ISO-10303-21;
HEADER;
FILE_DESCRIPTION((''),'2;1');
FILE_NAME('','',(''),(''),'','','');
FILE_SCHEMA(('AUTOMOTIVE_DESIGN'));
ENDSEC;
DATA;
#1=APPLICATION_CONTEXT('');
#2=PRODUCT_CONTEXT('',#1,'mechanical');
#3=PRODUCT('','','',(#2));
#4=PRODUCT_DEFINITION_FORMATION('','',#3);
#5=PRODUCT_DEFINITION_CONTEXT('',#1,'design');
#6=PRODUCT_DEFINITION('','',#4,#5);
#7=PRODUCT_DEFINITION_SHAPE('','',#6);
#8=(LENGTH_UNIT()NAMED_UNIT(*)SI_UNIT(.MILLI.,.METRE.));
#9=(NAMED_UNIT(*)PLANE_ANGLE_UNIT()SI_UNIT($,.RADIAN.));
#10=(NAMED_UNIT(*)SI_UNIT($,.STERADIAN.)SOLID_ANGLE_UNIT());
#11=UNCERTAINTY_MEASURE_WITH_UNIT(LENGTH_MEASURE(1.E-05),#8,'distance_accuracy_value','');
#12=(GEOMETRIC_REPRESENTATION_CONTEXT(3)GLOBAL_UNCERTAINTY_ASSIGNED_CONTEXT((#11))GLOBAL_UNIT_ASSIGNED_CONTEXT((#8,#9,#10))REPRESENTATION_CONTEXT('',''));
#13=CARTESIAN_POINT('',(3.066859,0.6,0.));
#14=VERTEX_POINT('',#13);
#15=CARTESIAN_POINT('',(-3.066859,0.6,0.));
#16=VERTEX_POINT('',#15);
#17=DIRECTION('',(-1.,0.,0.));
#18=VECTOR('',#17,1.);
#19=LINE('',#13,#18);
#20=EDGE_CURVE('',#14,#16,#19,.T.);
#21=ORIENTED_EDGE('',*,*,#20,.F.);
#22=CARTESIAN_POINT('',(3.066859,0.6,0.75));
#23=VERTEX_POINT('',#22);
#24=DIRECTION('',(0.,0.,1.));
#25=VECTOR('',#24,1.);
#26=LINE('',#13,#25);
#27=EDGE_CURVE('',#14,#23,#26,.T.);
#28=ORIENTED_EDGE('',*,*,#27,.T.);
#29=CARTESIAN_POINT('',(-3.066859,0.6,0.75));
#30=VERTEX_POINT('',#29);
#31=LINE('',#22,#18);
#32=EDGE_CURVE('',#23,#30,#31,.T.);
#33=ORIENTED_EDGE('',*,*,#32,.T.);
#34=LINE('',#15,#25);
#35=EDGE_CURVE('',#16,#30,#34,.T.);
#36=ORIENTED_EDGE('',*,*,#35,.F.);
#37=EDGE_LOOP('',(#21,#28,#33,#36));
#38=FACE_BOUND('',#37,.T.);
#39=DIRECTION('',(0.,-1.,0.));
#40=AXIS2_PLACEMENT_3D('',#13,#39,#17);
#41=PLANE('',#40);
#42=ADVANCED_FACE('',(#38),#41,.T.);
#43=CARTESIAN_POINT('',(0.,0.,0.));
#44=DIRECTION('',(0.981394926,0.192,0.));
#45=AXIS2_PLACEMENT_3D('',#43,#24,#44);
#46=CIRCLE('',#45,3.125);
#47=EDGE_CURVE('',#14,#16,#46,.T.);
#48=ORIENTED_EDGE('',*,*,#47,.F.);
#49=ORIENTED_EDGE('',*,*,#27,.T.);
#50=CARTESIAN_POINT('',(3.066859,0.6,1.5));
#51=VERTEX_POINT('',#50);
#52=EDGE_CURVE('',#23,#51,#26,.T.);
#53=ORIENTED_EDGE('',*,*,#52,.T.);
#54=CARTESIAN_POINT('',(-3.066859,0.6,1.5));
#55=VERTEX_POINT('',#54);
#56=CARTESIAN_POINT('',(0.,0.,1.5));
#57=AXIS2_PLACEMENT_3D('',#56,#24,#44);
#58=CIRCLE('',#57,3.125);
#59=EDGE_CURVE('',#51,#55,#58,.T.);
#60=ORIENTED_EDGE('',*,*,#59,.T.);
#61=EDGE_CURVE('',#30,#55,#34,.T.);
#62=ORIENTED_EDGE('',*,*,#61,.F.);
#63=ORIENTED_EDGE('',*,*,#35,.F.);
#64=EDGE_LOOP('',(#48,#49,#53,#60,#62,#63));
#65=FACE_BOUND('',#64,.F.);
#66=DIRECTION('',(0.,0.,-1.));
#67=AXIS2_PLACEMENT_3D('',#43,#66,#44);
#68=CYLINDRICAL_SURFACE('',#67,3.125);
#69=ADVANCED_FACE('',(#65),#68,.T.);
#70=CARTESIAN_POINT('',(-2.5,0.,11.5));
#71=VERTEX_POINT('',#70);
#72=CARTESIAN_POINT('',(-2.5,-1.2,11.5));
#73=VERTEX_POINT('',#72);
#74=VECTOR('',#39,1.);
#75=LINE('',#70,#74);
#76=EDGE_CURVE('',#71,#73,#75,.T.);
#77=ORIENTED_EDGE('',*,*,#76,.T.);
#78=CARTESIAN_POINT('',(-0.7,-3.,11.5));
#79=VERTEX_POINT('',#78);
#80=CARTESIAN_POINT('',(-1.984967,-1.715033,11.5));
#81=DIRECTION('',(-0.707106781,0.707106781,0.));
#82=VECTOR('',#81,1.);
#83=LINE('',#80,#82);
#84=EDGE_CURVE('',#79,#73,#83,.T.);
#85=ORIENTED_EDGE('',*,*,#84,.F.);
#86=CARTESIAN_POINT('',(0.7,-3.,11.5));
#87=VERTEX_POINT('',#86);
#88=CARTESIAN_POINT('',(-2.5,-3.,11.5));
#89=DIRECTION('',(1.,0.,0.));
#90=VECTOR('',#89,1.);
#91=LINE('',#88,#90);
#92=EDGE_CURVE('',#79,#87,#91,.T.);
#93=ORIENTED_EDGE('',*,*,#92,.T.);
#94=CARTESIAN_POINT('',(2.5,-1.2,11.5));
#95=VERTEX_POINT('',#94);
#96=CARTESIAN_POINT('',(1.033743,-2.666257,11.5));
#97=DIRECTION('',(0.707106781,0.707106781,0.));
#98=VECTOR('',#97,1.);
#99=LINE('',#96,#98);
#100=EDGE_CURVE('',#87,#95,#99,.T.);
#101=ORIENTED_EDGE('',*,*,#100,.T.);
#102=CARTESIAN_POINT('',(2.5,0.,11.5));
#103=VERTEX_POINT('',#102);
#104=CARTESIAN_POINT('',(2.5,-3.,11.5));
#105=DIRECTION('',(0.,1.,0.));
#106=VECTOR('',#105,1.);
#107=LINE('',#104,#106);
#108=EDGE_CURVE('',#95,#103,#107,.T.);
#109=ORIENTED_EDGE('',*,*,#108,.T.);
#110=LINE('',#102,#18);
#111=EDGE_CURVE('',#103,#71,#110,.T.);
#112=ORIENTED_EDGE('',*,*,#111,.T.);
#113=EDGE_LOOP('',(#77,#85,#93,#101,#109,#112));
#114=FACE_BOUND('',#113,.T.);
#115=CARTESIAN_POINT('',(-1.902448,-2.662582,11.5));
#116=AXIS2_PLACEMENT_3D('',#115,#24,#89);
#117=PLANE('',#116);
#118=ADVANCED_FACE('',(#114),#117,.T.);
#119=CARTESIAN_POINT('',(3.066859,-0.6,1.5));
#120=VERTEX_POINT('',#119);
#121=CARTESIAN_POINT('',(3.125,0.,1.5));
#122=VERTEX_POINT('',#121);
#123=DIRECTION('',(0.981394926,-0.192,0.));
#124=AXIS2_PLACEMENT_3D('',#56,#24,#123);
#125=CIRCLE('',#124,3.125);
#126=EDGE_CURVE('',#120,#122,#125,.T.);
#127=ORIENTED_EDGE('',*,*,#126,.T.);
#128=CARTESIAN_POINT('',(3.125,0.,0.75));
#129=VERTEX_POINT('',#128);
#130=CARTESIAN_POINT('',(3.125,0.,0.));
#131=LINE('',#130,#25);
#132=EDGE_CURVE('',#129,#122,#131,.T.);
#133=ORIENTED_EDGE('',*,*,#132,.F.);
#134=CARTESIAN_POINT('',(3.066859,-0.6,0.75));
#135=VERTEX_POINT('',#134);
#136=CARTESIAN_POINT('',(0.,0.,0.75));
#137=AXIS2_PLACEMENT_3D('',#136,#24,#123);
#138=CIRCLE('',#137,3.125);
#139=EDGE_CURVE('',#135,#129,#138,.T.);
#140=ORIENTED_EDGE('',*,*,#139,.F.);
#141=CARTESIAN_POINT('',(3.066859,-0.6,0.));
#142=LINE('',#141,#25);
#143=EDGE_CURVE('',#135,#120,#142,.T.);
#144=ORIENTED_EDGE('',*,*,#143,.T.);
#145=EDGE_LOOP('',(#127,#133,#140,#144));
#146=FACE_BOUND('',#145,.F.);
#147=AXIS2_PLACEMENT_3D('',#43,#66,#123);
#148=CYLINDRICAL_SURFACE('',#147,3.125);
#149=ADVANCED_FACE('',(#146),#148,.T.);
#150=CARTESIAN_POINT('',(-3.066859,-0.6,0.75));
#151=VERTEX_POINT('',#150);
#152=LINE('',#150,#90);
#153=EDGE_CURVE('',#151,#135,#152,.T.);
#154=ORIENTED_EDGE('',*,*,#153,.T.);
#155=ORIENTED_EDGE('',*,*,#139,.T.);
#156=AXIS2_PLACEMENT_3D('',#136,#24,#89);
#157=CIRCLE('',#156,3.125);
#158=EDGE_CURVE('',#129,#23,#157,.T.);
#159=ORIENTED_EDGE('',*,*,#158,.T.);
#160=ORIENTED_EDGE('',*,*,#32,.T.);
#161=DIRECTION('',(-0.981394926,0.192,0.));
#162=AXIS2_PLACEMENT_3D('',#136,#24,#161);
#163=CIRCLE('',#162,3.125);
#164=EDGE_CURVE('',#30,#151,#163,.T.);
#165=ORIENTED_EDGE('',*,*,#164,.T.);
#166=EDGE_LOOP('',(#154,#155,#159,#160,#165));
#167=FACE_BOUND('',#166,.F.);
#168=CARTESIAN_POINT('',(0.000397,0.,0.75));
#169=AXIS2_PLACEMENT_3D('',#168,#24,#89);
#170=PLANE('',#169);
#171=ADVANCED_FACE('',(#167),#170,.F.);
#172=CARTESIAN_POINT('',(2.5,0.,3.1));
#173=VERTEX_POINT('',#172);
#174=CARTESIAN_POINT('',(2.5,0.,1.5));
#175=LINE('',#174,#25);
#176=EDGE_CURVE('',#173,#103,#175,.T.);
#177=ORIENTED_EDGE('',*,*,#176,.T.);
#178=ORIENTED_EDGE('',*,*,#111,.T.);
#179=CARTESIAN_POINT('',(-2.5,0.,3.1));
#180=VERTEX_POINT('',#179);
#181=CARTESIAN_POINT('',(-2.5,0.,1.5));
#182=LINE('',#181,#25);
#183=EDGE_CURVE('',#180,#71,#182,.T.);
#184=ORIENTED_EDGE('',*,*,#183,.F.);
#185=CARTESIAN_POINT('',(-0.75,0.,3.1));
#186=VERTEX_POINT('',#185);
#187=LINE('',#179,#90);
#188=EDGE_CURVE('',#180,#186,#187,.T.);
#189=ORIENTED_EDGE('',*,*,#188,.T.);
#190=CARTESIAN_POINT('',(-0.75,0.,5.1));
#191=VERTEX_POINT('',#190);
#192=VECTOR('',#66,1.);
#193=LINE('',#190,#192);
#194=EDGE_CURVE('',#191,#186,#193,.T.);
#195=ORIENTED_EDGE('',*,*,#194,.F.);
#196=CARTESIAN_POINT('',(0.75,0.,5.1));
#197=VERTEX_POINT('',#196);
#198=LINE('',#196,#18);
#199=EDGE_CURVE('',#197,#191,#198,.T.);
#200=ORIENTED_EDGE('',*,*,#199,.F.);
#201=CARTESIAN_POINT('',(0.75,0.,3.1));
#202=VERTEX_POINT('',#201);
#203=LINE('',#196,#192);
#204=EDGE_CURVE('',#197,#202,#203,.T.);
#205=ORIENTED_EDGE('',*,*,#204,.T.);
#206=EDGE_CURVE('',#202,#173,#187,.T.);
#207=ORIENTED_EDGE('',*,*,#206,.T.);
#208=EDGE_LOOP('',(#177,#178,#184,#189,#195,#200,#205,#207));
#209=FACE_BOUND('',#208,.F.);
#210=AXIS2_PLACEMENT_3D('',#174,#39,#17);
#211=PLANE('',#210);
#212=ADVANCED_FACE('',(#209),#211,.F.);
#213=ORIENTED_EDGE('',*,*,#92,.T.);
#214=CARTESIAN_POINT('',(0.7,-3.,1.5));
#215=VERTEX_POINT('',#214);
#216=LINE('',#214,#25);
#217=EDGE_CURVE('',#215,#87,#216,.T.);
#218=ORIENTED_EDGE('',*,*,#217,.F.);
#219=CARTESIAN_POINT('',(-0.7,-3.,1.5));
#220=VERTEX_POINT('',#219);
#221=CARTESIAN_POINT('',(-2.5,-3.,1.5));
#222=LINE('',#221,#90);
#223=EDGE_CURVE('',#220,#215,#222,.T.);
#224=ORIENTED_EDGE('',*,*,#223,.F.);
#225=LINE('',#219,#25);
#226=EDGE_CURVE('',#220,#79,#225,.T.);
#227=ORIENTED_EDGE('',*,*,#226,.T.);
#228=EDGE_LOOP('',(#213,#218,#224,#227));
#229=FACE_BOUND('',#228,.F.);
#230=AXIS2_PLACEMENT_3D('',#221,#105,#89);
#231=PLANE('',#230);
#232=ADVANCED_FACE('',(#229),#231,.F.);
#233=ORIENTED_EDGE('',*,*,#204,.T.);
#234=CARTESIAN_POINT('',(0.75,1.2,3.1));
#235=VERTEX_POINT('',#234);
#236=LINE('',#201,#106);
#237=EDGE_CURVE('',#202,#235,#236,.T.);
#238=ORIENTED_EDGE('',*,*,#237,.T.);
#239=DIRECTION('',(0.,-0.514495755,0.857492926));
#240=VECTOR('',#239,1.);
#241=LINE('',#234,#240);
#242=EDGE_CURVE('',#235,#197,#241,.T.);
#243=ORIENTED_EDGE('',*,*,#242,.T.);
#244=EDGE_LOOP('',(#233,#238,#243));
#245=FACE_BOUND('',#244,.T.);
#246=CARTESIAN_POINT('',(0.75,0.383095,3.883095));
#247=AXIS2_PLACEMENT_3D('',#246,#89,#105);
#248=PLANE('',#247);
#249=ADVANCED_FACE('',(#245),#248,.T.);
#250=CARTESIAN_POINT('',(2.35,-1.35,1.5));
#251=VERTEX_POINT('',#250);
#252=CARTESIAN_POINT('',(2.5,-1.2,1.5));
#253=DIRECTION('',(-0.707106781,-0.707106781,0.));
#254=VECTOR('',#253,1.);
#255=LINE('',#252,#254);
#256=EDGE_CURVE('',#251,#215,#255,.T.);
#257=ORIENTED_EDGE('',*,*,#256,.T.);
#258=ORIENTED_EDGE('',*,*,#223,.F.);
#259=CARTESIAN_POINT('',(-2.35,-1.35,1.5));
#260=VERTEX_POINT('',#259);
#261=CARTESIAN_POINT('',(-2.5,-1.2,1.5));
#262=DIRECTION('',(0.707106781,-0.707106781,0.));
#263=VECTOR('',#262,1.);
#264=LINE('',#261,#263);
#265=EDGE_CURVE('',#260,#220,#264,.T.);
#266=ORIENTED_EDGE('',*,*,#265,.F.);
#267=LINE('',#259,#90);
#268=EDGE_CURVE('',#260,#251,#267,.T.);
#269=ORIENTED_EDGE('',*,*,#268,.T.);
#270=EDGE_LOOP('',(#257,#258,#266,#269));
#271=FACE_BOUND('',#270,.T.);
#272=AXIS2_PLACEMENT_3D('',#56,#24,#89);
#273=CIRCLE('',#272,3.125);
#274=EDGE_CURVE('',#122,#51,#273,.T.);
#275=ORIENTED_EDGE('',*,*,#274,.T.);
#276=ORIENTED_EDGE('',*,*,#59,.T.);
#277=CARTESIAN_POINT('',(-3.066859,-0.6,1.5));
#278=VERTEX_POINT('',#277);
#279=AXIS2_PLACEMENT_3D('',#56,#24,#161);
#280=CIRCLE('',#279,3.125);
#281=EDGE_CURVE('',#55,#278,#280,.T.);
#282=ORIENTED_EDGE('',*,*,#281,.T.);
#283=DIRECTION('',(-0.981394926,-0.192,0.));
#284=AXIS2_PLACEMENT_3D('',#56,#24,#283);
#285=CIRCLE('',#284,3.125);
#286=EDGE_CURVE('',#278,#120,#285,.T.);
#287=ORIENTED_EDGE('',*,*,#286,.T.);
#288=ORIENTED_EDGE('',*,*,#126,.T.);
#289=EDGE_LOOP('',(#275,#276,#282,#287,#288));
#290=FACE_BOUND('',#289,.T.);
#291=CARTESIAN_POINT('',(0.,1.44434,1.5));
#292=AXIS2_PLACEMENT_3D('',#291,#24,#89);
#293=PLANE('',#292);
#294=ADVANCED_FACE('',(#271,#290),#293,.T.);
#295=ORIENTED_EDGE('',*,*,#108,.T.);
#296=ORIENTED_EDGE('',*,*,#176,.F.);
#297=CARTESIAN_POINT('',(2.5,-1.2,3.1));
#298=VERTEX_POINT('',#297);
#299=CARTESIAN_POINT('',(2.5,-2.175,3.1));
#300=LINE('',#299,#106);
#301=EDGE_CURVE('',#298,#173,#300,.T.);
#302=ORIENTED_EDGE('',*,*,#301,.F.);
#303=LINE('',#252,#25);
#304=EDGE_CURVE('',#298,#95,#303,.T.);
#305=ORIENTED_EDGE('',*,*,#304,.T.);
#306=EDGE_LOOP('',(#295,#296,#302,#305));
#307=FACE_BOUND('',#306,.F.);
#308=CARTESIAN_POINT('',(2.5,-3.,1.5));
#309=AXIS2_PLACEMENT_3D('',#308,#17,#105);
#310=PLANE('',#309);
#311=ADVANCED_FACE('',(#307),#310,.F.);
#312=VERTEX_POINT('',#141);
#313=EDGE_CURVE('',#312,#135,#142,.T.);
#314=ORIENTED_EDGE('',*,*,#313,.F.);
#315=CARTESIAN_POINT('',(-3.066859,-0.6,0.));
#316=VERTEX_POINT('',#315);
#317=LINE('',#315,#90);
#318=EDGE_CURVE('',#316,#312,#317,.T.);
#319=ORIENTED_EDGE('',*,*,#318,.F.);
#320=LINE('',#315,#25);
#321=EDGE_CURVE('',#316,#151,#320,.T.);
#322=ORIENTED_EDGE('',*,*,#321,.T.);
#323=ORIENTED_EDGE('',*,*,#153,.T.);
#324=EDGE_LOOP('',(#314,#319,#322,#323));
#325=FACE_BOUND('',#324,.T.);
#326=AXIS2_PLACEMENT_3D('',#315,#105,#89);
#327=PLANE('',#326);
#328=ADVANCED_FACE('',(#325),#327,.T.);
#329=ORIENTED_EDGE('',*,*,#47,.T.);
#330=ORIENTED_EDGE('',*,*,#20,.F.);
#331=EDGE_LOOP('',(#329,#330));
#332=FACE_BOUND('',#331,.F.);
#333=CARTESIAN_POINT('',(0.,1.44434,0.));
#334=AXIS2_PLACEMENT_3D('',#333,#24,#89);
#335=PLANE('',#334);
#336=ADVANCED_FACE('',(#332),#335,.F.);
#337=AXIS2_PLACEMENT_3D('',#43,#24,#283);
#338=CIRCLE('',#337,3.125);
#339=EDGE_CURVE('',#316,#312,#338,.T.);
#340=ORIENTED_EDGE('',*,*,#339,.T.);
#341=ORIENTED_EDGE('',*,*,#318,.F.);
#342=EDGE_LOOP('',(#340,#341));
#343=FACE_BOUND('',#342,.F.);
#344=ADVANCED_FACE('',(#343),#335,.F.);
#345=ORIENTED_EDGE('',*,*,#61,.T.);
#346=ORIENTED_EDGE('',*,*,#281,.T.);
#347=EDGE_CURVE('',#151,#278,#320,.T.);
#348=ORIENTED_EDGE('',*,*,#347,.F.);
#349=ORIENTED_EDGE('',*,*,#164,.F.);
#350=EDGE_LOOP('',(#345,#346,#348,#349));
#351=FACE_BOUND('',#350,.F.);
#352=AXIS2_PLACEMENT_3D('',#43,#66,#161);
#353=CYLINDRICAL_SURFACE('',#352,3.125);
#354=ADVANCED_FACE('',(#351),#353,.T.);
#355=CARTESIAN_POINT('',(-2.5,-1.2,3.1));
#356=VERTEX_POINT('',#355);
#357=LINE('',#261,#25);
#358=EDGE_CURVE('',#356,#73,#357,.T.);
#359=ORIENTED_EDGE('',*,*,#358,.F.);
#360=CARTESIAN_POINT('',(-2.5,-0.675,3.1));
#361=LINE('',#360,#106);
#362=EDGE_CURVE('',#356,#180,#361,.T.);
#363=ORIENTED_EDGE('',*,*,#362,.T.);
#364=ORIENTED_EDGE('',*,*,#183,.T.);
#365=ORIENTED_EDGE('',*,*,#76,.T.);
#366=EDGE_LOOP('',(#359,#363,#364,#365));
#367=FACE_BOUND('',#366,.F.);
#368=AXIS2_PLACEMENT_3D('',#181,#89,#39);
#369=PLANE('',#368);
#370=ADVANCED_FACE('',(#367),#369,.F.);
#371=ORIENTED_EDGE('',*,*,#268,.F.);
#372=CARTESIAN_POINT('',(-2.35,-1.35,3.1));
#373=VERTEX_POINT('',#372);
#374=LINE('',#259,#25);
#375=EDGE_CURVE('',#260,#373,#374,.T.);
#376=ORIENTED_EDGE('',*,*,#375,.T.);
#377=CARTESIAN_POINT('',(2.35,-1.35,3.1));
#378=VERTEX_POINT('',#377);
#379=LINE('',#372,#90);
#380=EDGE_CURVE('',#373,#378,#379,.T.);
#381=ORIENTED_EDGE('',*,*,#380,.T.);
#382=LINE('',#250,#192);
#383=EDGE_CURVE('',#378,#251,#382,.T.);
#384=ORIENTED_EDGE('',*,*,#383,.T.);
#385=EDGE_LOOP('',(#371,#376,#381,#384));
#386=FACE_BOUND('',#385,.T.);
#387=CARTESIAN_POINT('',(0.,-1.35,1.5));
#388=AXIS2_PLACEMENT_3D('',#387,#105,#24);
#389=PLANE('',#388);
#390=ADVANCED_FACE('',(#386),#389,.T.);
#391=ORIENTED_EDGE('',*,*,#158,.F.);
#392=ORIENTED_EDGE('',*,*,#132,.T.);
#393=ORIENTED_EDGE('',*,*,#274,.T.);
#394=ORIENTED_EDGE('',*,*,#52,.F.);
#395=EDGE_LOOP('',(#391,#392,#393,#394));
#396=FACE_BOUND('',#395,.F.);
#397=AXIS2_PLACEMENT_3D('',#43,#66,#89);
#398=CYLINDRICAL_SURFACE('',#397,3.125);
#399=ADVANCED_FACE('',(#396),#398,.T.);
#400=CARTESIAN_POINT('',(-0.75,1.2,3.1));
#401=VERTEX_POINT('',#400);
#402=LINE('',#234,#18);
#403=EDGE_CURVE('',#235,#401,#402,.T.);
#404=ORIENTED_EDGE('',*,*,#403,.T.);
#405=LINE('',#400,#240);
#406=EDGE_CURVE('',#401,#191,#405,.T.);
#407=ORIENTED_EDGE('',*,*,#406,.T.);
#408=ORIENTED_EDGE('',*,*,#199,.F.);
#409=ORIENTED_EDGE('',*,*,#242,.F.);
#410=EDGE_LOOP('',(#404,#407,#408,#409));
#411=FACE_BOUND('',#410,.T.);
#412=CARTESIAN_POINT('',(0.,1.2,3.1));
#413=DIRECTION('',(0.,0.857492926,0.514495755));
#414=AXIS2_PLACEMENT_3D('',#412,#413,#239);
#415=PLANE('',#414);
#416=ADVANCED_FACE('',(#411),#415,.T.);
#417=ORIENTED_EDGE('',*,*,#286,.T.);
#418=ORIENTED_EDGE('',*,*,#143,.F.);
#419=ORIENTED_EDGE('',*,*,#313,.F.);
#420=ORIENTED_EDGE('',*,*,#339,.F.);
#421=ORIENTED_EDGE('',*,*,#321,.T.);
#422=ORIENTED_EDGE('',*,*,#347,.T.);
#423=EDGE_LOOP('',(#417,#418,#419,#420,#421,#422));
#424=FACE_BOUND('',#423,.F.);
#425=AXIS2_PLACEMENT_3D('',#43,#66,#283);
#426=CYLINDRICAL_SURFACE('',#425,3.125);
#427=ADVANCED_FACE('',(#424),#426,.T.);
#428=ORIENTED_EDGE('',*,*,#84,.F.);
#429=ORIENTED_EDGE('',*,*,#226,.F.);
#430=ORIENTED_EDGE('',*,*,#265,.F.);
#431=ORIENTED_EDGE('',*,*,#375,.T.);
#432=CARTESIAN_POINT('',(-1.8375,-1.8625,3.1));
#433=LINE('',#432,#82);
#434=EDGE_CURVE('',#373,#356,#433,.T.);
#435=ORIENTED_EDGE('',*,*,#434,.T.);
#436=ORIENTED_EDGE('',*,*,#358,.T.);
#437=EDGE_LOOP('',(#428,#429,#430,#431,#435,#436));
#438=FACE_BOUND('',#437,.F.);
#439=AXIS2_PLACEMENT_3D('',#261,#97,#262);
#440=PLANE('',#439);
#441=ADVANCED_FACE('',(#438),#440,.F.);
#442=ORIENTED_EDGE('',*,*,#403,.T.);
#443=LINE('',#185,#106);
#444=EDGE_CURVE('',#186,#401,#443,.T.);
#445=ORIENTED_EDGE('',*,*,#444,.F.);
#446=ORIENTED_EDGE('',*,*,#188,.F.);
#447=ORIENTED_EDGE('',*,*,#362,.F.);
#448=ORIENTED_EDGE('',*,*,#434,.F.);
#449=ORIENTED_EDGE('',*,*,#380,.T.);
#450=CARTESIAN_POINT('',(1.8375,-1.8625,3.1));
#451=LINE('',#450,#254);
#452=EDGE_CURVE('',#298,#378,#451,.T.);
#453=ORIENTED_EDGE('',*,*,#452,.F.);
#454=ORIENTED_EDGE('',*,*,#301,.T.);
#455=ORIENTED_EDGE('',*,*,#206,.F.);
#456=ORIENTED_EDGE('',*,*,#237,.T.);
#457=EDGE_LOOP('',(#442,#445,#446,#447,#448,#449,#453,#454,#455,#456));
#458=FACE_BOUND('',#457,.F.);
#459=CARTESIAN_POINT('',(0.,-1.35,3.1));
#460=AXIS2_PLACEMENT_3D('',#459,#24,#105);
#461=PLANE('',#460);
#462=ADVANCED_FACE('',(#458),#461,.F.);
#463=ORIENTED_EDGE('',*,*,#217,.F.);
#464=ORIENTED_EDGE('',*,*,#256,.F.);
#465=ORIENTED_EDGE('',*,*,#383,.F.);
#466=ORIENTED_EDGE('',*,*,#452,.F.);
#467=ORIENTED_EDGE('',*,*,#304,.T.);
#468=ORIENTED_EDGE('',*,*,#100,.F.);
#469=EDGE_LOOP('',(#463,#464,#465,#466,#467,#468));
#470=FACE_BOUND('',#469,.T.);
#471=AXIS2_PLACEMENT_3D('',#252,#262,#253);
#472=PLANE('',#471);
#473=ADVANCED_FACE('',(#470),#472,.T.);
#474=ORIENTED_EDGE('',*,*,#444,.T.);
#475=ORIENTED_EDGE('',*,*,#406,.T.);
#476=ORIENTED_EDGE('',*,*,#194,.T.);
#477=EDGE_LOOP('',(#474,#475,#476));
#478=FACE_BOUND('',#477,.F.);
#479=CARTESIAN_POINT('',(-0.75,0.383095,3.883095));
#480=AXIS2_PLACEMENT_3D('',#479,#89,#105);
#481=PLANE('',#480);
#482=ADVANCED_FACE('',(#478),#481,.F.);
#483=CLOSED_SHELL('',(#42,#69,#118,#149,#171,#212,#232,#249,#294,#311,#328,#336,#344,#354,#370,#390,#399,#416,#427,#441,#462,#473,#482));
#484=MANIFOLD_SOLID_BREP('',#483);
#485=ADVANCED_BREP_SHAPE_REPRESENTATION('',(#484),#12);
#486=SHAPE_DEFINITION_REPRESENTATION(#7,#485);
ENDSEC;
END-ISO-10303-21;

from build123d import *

# Parameters (mm, degrees)
F1_DEPTH      = 1.5
F2_DEPTH      = 0.75
F4_DEPTH      = 10
F5_T1_DEPTH   = 14.6290293783
F6_W          = 1.35
F6_H          = 1.6
F7_DEPTH      = 3.126
F7_DEPTH_BACK = 25
F9_DEPTH      = 0.75


# Not quite as in the source:
# - a fillet or chamfer that OpenCascade refuses, or shapes differently, is made with other operations: its cross-section is extruded or revolved along the edge and cut away or added


with BuildPart() as f1:
    # F0 (on Top) → F1 (new body)
    with BuildSketch(Plane.XY):
        with BuildLine():
            Line((-3.0668591425, 0.6), (3.0668591425, 0.6))
            ThreePointArc((3.0668591425, 0.6), (0, 3.125), (-3.0668591425, 0.6))
        make_face()
        with BuildLine():
            ThreePointArc((3.0668591425, -0.6), (3.1104308239, -0.3014051921), (3.125, 0))
            ThreePointArc((3.125, 0), (3.1104308239, 0.3014051921), (3.0668591425, 0.6))
            Line((3.0668591425, 0.6), (-3.0668591425, 0.6))
            ThreePointArc((-3.0668591425, 0.6), (-3.125, 0), (-3.0668591425, -0.6))
            Line((-3.0668591425, -0.6), (3.0668591425, -0.6))
        make_face()
        with BuildLine():
            ThreePointArc((-3.0668591425, -0.6), (0, -3.125), (3.0668591425, -0.6))
            Line((3.0668591425, -0.6), (-3.0668591425, -0.6))
        make_face()
    extrude(amount=F1_DEPTH)

    # F0 (on Top) → F2 (cut)
    with BuildSketch(Plane.XY):
        with BuildLine():
            ThreePointArc((3.0668591425, -0.6), (3.1104308239, -0.3014051921), (3.125, 0))
            ThreePointArc((3.125, 0), (3.1104308239, 0.3014051921), (3.0668591425, 0.6))
            Line((3.0668591425, 0.6), (-3.0668591425, 0.6))
            ThreePointArc((-3.0668591425, 0.6), (-3.125, 0), (-3.0668591425, -0.6))
            Line((-3.0668591425, -0.6), (3.0668591425, -0.6))
        make_face()
    extrude(amount=F2_DEPTH, mode=Mode.SUBTRACT)

    # F3 (on face) → F4 (join)
    with BuildSketch(Plane.XY.offset(1.5)):
        with BuildLine():
            ThreePointArc((-0.875, -3), (-1.7787811838, -2.5693505989), (-2.5, -1.875))
            Line((-2.5, -1.875), (-2.5, -3))
            Line((-2.5, -3), (-0.875, -3))
        make_face()
        with BuildLine():
            Line((2.5, 0), (-2.5, 0))
            Line((-2.5, 0), (-2.5, -1.875))
            ThreePointArc((-2.5, -1.875), (-1.7787811838, -2.5693505989), (-0.875, -3))
            Line((-0.875, -3), (0.875, -3))
            ThreePointArc((0.875, -3), (1.7787811838, -2.5693505989), (2.5, -1.875))
            Line((2.5, -1.875), (2.5, 0))
        make_face()
        with BuildLine():
            Line((2.5, -3), (2.5, -1.875))
            ThreePointArc((2.5, -1.875), (1.7787811838, -2.5693505989), (0.875, -3))
            Line((0.875, -3), (2.5, -3))
        make_face()
    extrude(amount=F4_DEPTH)

    # F5: chamfer of 1.8 on 2 edges, made by hand

    # F5_s2 → F5_t1 (cut)
    with BuildSketch(Plane.XY.offset(1.5)):
        Polygon((-2.5, -1.2), (-0.7, -3), (-2.5, -3), align=None)
        Polygon((2.5, -1.2), (0.7, -3), (2.5, -3), align=None)
    extrude(amount=F5_T1_DEPTH, mode=Mode.SUBTRACT)

    # F6 (on Right) → F7 (cut, two sides)
    with BuildSketch(Plane.YZ) as f7_sk:
        with Locations((-0.675, 2.3)):
            Rectangle(F6_W, F6_H)
    extrude(amount=-F7_DEPTH, mode=Mode.SUBTRACT)
    extrude(f7_sk.sketch, amount=F7_DEPTH_BACK, mode=Mode.SUBTRACT)

    # F8 (on Right) → F9 (join, symmetric)
    with BuildSketch(Plane.YZ):
        Polygon((0, 5.1), (0, 3.1), (1.2, 3.1), align=None)
    extrude(amount=F9_DEPTH, both=True)


solid = f1.part
